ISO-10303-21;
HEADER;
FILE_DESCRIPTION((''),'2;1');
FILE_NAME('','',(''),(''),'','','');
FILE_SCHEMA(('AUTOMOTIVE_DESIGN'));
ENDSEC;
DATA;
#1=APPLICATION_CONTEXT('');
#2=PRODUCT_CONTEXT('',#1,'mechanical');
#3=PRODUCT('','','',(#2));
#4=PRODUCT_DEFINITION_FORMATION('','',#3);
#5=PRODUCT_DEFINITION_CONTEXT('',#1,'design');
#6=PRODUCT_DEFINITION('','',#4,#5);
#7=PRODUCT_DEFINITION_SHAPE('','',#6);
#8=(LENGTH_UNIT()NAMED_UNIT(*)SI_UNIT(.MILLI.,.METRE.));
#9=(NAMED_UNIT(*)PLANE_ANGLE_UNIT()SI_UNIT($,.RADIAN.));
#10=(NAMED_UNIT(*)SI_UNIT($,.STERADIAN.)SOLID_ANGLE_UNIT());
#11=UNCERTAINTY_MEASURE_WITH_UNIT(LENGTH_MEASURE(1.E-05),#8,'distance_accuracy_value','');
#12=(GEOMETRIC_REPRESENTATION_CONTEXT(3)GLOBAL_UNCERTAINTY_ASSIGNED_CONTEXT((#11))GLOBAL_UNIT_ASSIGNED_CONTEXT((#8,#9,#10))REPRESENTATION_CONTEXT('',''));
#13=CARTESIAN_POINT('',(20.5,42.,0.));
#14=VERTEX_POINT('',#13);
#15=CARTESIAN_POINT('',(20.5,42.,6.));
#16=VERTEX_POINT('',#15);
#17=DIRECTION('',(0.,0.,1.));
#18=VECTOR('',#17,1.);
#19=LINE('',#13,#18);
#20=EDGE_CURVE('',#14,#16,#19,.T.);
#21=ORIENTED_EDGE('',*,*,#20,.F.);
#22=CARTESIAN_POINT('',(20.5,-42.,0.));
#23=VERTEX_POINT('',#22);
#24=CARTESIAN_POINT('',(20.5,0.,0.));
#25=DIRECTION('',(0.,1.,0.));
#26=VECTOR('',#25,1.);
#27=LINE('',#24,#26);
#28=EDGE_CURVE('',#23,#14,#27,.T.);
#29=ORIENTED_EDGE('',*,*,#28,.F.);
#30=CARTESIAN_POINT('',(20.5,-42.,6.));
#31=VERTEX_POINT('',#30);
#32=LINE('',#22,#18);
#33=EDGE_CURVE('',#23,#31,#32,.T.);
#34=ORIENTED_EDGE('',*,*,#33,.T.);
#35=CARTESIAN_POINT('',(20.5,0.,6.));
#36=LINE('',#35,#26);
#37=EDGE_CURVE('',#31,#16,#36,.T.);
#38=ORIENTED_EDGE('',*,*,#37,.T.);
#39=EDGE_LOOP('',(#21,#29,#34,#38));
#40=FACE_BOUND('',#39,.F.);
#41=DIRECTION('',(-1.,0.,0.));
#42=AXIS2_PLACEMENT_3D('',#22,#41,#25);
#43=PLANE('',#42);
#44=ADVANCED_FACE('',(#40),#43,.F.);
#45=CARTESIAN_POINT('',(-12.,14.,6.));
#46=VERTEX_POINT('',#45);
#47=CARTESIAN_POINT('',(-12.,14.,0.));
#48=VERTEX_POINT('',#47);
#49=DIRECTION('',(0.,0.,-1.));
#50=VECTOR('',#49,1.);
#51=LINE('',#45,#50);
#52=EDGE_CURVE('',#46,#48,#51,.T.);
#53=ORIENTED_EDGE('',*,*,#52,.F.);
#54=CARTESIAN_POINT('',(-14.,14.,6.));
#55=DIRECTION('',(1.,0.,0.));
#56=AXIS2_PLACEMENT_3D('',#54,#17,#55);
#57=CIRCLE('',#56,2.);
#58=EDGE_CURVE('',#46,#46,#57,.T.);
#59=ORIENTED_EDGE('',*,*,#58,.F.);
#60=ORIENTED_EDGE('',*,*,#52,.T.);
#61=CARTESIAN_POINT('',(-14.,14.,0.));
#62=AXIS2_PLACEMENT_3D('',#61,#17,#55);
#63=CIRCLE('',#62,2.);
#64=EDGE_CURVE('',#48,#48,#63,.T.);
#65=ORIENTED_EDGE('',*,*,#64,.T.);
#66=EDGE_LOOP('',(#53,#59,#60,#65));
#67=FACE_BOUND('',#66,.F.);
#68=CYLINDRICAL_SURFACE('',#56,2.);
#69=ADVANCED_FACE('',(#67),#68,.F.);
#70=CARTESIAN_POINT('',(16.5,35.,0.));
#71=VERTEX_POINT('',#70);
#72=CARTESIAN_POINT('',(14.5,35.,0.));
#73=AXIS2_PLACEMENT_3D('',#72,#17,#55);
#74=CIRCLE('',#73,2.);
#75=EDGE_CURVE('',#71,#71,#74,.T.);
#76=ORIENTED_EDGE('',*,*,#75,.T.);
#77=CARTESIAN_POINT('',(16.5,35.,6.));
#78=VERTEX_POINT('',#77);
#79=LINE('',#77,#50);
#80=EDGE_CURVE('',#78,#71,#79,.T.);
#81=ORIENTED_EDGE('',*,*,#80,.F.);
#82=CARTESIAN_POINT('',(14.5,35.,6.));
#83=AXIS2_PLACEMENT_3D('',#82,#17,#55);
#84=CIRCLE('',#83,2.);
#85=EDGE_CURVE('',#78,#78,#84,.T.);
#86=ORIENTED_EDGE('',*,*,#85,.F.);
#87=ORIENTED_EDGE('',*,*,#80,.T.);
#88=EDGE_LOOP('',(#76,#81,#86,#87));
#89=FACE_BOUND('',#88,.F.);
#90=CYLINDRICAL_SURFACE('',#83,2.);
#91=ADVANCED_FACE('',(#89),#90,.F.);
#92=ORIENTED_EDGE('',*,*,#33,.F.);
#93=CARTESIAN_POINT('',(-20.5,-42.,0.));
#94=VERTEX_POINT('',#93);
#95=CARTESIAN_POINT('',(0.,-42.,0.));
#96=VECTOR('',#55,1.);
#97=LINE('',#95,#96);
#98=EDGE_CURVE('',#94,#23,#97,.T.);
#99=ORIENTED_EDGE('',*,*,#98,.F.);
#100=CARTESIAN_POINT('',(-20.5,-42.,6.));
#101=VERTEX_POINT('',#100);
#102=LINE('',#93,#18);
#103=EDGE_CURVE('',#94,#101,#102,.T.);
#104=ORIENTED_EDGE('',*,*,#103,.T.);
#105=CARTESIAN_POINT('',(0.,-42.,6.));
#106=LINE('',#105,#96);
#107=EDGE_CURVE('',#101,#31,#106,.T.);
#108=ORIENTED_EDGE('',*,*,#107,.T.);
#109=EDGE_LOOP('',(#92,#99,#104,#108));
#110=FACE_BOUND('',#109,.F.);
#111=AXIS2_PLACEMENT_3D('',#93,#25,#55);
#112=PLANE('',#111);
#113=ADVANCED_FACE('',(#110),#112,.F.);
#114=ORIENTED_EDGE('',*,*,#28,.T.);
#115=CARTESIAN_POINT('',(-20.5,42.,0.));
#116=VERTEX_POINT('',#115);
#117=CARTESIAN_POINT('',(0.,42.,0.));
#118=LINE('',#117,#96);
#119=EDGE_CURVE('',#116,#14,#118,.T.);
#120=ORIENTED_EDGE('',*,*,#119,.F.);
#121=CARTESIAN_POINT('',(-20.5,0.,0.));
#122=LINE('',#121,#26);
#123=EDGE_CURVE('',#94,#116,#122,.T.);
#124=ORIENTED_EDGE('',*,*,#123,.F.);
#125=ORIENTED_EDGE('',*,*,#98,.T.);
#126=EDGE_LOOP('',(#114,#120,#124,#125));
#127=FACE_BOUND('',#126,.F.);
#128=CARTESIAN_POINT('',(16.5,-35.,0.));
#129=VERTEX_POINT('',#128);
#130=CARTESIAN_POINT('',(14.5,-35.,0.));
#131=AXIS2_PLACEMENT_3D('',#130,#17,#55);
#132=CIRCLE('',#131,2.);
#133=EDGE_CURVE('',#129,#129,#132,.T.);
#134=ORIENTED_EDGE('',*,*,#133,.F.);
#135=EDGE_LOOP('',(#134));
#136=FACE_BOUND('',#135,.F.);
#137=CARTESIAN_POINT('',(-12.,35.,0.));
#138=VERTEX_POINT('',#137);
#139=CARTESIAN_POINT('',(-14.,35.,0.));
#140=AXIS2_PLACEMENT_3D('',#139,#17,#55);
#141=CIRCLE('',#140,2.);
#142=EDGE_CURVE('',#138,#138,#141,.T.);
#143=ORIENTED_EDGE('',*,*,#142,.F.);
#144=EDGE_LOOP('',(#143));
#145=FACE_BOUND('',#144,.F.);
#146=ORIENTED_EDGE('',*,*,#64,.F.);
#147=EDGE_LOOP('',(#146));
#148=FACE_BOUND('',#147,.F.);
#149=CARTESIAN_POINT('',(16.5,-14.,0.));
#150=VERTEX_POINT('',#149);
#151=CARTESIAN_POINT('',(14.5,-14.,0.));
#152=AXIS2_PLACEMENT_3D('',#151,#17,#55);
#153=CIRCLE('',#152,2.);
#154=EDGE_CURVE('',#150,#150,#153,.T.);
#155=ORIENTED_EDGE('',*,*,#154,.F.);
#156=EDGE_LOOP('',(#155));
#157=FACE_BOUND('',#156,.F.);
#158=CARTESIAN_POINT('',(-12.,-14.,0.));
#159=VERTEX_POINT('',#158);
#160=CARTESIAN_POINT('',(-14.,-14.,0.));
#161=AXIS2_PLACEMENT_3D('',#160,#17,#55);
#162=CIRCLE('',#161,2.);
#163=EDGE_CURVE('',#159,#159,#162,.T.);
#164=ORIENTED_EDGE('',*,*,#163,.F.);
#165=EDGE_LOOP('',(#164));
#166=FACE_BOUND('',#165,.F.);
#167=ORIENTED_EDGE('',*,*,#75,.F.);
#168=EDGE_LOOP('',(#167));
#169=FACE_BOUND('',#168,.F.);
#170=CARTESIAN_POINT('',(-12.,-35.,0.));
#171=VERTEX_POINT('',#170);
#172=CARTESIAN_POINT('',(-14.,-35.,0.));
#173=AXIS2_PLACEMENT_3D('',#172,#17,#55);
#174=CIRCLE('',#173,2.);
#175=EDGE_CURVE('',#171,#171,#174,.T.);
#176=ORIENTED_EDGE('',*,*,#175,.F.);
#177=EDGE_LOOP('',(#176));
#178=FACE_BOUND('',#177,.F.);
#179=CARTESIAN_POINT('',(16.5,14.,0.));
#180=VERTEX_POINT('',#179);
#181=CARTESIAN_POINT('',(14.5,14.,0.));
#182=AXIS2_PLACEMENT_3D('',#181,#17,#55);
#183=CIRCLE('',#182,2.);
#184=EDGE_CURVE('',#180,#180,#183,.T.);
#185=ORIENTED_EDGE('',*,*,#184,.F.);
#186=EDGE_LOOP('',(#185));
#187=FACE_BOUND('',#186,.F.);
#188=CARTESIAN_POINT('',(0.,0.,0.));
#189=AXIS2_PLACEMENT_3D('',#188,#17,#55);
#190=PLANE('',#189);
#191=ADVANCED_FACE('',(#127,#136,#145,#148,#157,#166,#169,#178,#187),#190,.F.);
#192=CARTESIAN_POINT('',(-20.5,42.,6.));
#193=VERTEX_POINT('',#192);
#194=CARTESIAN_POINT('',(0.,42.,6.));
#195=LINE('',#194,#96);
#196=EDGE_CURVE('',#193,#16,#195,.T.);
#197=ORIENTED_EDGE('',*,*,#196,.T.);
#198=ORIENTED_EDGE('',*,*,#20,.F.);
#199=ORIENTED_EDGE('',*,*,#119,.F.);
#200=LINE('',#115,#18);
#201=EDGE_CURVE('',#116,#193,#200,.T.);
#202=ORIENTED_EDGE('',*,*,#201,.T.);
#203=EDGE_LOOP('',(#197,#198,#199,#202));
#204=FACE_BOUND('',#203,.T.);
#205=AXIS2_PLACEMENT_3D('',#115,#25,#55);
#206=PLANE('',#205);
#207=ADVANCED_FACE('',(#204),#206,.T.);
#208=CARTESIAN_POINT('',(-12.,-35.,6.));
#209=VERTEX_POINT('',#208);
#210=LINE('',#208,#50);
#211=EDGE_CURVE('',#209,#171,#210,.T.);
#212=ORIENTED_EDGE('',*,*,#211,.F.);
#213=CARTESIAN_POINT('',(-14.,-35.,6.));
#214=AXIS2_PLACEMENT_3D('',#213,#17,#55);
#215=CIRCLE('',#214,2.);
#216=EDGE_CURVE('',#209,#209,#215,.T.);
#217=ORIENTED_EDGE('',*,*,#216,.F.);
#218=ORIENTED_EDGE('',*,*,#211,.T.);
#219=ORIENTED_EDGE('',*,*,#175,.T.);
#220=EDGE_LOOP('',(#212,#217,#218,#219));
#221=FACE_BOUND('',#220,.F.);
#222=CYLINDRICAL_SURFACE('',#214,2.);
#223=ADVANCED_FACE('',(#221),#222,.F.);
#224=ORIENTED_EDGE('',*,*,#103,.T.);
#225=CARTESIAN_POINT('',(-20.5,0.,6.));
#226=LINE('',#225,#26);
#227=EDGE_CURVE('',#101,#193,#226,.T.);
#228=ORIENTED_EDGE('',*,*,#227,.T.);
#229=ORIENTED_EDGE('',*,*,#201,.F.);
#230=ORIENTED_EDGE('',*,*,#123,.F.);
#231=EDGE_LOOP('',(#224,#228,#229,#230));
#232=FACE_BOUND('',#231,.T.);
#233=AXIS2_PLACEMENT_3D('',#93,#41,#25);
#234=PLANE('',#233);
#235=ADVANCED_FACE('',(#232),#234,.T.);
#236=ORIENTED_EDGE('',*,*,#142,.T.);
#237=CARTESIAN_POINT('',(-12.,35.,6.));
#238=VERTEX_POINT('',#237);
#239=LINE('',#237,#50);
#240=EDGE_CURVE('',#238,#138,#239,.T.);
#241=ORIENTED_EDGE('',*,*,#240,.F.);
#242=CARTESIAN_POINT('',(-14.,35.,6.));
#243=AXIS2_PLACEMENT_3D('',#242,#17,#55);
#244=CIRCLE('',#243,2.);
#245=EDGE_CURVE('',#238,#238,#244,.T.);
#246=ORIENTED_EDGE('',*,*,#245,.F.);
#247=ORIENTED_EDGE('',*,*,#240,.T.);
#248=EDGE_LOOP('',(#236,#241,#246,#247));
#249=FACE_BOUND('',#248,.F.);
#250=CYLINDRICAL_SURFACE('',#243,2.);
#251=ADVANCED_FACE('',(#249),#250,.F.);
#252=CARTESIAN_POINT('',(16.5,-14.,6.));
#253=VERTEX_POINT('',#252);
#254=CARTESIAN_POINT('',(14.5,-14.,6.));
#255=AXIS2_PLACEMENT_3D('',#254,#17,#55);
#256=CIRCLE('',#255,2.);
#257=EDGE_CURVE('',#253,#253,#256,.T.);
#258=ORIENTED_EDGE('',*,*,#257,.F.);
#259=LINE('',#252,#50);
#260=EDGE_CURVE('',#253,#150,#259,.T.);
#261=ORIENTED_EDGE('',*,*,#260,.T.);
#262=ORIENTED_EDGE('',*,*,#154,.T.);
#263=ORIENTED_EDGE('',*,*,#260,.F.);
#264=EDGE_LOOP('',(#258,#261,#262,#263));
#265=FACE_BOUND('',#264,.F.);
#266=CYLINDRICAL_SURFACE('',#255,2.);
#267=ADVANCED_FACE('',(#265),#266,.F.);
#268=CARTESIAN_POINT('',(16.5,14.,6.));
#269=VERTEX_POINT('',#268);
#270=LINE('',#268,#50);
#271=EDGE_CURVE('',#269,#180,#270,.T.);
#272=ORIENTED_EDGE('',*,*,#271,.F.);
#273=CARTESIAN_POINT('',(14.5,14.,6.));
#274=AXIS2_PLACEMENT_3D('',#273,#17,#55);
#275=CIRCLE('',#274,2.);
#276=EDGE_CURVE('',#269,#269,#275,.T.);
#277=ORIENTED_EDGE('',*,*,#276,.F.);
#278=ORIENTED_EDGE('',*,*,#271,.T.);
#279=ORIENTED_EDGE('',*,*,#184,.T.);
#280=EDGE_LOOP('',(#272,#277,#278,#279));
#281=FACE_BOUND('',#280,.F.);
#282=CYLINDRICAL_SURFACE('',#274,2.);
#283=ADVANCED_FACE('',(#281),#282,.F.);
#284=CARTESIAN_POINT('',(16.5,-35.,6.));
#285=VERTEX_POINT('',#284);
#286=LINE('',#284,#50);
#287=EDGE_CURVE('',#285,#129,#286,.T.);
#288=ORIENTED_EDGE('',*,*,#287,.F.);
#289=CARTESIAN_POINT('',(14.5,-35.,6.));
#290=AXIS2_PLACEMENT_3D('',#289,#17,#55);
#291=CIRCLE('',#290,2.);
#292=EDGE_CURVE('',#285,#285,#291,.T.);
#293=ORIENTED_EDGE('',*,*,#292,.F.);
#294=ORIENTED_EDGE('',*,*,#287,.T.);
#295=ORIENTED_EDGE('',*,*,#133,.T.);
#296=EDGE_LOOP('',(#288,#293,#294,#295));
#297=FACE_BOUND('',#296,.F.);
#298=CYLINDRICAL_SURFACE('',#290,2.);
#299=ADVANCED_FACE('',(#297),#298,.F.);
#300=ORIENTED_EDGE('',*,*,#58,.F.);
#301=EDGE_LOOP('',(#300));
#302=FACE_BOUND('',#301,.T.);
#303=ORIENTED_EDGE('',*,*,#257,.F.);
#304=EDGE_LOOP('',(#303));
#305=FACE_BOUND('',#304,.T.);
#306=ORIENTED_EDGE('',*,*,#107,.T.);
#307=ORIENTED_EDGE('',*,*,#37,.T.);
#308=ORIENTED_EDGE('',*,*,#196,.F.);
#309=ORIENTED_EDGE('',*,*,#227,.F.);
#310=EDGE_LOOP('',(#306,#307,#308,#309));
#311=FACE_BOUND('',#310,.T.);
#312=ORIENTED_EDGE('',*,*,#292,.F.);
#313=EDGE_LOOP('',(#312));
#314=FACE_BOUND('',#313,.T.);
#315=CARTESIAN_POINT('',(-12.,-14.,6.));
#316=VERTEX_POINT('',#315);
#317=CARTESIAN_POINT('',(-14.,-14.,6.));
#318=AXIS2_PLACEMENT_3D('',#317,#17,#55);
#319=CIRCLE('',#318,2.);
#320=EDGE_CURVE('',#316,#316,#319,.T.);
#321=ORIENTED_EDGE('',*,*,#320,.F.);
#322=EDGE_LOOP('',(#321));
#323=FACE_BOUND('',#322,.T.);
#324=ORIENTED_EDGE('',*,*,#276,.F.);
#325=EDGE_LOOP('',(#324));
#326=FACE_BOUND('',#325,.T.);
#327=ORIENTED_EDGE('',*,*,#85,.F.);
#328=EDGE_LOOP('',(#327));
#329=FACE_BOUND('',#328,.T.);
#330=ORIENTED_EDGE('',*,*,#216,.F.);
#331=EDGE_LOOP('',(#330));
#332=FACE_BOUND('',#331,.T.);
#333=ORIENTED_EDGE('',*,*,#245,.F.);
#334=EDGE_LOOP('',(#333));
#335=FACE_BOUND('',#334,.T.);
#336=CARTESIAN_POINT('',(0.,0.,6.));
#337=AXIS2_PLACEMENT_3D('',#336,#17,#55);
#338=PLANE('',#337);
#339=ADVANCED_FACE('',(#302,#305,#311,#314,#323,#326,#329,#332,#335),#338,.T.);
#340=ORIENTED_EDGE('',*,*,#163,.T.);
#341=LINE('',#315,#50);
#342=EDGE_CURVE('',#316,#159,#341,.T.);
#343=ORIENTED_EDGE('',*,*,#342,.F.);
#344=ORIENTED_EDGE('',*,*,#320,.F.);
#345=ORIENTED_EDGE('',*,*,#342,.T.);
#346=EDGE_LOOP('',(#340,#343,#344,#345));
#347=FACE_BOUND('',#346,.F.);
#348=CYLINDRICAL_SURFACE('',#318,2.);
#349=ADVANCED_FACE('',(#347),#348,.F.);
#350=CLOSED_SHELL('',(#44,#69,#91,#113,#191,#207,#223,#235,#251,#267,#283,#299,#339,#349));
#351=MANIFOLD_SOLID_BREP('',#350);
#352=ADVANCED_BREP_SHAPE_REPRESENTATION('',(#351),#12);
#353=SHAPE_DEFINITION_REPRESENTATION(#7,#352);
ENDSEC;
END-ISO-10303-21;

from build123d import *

# Parameters (mm, degrees)
F0_W     = 41
F0_H     = 84
F1_DEPTH = 6
F3_R     = 2
F4_DEPTH = 6


# Not quite as in the source:
# - a feature names something its author has since deleted; it is built from what else it names


with BuildPart() as f1:
    # F0 (on Top) → F1 (new body)
    with BuildSketch(Plane.XY):
        Rectangle(F0_W, F0_H)
    extrude(amount=F1_DEPTH)

    # F3 (on face) → F4 (cut, through all)
    with BuildSketch(Plane.XY.offset(6)):
        with Locations((-14, 14)):
            Circle(F3_R)
        with Locations((-14, -14)):
            Circle(F3_R)
        with Locations((14.5, 14)):
            Circle(F3_R)
        with Locations((14.5, -14)):
            Circle(F3_R)
        with Locations((14.5, -35)):
            Circle(F3_R)
        with Locations((14.5, 35)):
            Circle(F3_R)
        with Locations((-14, 35)):
            Circle(F3_R)
        with Locations((-14, -35)):
            Circle(F3_R)
    extrude(amount=-F4_DEPTH, mode=Mode.SUBTRACT)


solid = f1.part
